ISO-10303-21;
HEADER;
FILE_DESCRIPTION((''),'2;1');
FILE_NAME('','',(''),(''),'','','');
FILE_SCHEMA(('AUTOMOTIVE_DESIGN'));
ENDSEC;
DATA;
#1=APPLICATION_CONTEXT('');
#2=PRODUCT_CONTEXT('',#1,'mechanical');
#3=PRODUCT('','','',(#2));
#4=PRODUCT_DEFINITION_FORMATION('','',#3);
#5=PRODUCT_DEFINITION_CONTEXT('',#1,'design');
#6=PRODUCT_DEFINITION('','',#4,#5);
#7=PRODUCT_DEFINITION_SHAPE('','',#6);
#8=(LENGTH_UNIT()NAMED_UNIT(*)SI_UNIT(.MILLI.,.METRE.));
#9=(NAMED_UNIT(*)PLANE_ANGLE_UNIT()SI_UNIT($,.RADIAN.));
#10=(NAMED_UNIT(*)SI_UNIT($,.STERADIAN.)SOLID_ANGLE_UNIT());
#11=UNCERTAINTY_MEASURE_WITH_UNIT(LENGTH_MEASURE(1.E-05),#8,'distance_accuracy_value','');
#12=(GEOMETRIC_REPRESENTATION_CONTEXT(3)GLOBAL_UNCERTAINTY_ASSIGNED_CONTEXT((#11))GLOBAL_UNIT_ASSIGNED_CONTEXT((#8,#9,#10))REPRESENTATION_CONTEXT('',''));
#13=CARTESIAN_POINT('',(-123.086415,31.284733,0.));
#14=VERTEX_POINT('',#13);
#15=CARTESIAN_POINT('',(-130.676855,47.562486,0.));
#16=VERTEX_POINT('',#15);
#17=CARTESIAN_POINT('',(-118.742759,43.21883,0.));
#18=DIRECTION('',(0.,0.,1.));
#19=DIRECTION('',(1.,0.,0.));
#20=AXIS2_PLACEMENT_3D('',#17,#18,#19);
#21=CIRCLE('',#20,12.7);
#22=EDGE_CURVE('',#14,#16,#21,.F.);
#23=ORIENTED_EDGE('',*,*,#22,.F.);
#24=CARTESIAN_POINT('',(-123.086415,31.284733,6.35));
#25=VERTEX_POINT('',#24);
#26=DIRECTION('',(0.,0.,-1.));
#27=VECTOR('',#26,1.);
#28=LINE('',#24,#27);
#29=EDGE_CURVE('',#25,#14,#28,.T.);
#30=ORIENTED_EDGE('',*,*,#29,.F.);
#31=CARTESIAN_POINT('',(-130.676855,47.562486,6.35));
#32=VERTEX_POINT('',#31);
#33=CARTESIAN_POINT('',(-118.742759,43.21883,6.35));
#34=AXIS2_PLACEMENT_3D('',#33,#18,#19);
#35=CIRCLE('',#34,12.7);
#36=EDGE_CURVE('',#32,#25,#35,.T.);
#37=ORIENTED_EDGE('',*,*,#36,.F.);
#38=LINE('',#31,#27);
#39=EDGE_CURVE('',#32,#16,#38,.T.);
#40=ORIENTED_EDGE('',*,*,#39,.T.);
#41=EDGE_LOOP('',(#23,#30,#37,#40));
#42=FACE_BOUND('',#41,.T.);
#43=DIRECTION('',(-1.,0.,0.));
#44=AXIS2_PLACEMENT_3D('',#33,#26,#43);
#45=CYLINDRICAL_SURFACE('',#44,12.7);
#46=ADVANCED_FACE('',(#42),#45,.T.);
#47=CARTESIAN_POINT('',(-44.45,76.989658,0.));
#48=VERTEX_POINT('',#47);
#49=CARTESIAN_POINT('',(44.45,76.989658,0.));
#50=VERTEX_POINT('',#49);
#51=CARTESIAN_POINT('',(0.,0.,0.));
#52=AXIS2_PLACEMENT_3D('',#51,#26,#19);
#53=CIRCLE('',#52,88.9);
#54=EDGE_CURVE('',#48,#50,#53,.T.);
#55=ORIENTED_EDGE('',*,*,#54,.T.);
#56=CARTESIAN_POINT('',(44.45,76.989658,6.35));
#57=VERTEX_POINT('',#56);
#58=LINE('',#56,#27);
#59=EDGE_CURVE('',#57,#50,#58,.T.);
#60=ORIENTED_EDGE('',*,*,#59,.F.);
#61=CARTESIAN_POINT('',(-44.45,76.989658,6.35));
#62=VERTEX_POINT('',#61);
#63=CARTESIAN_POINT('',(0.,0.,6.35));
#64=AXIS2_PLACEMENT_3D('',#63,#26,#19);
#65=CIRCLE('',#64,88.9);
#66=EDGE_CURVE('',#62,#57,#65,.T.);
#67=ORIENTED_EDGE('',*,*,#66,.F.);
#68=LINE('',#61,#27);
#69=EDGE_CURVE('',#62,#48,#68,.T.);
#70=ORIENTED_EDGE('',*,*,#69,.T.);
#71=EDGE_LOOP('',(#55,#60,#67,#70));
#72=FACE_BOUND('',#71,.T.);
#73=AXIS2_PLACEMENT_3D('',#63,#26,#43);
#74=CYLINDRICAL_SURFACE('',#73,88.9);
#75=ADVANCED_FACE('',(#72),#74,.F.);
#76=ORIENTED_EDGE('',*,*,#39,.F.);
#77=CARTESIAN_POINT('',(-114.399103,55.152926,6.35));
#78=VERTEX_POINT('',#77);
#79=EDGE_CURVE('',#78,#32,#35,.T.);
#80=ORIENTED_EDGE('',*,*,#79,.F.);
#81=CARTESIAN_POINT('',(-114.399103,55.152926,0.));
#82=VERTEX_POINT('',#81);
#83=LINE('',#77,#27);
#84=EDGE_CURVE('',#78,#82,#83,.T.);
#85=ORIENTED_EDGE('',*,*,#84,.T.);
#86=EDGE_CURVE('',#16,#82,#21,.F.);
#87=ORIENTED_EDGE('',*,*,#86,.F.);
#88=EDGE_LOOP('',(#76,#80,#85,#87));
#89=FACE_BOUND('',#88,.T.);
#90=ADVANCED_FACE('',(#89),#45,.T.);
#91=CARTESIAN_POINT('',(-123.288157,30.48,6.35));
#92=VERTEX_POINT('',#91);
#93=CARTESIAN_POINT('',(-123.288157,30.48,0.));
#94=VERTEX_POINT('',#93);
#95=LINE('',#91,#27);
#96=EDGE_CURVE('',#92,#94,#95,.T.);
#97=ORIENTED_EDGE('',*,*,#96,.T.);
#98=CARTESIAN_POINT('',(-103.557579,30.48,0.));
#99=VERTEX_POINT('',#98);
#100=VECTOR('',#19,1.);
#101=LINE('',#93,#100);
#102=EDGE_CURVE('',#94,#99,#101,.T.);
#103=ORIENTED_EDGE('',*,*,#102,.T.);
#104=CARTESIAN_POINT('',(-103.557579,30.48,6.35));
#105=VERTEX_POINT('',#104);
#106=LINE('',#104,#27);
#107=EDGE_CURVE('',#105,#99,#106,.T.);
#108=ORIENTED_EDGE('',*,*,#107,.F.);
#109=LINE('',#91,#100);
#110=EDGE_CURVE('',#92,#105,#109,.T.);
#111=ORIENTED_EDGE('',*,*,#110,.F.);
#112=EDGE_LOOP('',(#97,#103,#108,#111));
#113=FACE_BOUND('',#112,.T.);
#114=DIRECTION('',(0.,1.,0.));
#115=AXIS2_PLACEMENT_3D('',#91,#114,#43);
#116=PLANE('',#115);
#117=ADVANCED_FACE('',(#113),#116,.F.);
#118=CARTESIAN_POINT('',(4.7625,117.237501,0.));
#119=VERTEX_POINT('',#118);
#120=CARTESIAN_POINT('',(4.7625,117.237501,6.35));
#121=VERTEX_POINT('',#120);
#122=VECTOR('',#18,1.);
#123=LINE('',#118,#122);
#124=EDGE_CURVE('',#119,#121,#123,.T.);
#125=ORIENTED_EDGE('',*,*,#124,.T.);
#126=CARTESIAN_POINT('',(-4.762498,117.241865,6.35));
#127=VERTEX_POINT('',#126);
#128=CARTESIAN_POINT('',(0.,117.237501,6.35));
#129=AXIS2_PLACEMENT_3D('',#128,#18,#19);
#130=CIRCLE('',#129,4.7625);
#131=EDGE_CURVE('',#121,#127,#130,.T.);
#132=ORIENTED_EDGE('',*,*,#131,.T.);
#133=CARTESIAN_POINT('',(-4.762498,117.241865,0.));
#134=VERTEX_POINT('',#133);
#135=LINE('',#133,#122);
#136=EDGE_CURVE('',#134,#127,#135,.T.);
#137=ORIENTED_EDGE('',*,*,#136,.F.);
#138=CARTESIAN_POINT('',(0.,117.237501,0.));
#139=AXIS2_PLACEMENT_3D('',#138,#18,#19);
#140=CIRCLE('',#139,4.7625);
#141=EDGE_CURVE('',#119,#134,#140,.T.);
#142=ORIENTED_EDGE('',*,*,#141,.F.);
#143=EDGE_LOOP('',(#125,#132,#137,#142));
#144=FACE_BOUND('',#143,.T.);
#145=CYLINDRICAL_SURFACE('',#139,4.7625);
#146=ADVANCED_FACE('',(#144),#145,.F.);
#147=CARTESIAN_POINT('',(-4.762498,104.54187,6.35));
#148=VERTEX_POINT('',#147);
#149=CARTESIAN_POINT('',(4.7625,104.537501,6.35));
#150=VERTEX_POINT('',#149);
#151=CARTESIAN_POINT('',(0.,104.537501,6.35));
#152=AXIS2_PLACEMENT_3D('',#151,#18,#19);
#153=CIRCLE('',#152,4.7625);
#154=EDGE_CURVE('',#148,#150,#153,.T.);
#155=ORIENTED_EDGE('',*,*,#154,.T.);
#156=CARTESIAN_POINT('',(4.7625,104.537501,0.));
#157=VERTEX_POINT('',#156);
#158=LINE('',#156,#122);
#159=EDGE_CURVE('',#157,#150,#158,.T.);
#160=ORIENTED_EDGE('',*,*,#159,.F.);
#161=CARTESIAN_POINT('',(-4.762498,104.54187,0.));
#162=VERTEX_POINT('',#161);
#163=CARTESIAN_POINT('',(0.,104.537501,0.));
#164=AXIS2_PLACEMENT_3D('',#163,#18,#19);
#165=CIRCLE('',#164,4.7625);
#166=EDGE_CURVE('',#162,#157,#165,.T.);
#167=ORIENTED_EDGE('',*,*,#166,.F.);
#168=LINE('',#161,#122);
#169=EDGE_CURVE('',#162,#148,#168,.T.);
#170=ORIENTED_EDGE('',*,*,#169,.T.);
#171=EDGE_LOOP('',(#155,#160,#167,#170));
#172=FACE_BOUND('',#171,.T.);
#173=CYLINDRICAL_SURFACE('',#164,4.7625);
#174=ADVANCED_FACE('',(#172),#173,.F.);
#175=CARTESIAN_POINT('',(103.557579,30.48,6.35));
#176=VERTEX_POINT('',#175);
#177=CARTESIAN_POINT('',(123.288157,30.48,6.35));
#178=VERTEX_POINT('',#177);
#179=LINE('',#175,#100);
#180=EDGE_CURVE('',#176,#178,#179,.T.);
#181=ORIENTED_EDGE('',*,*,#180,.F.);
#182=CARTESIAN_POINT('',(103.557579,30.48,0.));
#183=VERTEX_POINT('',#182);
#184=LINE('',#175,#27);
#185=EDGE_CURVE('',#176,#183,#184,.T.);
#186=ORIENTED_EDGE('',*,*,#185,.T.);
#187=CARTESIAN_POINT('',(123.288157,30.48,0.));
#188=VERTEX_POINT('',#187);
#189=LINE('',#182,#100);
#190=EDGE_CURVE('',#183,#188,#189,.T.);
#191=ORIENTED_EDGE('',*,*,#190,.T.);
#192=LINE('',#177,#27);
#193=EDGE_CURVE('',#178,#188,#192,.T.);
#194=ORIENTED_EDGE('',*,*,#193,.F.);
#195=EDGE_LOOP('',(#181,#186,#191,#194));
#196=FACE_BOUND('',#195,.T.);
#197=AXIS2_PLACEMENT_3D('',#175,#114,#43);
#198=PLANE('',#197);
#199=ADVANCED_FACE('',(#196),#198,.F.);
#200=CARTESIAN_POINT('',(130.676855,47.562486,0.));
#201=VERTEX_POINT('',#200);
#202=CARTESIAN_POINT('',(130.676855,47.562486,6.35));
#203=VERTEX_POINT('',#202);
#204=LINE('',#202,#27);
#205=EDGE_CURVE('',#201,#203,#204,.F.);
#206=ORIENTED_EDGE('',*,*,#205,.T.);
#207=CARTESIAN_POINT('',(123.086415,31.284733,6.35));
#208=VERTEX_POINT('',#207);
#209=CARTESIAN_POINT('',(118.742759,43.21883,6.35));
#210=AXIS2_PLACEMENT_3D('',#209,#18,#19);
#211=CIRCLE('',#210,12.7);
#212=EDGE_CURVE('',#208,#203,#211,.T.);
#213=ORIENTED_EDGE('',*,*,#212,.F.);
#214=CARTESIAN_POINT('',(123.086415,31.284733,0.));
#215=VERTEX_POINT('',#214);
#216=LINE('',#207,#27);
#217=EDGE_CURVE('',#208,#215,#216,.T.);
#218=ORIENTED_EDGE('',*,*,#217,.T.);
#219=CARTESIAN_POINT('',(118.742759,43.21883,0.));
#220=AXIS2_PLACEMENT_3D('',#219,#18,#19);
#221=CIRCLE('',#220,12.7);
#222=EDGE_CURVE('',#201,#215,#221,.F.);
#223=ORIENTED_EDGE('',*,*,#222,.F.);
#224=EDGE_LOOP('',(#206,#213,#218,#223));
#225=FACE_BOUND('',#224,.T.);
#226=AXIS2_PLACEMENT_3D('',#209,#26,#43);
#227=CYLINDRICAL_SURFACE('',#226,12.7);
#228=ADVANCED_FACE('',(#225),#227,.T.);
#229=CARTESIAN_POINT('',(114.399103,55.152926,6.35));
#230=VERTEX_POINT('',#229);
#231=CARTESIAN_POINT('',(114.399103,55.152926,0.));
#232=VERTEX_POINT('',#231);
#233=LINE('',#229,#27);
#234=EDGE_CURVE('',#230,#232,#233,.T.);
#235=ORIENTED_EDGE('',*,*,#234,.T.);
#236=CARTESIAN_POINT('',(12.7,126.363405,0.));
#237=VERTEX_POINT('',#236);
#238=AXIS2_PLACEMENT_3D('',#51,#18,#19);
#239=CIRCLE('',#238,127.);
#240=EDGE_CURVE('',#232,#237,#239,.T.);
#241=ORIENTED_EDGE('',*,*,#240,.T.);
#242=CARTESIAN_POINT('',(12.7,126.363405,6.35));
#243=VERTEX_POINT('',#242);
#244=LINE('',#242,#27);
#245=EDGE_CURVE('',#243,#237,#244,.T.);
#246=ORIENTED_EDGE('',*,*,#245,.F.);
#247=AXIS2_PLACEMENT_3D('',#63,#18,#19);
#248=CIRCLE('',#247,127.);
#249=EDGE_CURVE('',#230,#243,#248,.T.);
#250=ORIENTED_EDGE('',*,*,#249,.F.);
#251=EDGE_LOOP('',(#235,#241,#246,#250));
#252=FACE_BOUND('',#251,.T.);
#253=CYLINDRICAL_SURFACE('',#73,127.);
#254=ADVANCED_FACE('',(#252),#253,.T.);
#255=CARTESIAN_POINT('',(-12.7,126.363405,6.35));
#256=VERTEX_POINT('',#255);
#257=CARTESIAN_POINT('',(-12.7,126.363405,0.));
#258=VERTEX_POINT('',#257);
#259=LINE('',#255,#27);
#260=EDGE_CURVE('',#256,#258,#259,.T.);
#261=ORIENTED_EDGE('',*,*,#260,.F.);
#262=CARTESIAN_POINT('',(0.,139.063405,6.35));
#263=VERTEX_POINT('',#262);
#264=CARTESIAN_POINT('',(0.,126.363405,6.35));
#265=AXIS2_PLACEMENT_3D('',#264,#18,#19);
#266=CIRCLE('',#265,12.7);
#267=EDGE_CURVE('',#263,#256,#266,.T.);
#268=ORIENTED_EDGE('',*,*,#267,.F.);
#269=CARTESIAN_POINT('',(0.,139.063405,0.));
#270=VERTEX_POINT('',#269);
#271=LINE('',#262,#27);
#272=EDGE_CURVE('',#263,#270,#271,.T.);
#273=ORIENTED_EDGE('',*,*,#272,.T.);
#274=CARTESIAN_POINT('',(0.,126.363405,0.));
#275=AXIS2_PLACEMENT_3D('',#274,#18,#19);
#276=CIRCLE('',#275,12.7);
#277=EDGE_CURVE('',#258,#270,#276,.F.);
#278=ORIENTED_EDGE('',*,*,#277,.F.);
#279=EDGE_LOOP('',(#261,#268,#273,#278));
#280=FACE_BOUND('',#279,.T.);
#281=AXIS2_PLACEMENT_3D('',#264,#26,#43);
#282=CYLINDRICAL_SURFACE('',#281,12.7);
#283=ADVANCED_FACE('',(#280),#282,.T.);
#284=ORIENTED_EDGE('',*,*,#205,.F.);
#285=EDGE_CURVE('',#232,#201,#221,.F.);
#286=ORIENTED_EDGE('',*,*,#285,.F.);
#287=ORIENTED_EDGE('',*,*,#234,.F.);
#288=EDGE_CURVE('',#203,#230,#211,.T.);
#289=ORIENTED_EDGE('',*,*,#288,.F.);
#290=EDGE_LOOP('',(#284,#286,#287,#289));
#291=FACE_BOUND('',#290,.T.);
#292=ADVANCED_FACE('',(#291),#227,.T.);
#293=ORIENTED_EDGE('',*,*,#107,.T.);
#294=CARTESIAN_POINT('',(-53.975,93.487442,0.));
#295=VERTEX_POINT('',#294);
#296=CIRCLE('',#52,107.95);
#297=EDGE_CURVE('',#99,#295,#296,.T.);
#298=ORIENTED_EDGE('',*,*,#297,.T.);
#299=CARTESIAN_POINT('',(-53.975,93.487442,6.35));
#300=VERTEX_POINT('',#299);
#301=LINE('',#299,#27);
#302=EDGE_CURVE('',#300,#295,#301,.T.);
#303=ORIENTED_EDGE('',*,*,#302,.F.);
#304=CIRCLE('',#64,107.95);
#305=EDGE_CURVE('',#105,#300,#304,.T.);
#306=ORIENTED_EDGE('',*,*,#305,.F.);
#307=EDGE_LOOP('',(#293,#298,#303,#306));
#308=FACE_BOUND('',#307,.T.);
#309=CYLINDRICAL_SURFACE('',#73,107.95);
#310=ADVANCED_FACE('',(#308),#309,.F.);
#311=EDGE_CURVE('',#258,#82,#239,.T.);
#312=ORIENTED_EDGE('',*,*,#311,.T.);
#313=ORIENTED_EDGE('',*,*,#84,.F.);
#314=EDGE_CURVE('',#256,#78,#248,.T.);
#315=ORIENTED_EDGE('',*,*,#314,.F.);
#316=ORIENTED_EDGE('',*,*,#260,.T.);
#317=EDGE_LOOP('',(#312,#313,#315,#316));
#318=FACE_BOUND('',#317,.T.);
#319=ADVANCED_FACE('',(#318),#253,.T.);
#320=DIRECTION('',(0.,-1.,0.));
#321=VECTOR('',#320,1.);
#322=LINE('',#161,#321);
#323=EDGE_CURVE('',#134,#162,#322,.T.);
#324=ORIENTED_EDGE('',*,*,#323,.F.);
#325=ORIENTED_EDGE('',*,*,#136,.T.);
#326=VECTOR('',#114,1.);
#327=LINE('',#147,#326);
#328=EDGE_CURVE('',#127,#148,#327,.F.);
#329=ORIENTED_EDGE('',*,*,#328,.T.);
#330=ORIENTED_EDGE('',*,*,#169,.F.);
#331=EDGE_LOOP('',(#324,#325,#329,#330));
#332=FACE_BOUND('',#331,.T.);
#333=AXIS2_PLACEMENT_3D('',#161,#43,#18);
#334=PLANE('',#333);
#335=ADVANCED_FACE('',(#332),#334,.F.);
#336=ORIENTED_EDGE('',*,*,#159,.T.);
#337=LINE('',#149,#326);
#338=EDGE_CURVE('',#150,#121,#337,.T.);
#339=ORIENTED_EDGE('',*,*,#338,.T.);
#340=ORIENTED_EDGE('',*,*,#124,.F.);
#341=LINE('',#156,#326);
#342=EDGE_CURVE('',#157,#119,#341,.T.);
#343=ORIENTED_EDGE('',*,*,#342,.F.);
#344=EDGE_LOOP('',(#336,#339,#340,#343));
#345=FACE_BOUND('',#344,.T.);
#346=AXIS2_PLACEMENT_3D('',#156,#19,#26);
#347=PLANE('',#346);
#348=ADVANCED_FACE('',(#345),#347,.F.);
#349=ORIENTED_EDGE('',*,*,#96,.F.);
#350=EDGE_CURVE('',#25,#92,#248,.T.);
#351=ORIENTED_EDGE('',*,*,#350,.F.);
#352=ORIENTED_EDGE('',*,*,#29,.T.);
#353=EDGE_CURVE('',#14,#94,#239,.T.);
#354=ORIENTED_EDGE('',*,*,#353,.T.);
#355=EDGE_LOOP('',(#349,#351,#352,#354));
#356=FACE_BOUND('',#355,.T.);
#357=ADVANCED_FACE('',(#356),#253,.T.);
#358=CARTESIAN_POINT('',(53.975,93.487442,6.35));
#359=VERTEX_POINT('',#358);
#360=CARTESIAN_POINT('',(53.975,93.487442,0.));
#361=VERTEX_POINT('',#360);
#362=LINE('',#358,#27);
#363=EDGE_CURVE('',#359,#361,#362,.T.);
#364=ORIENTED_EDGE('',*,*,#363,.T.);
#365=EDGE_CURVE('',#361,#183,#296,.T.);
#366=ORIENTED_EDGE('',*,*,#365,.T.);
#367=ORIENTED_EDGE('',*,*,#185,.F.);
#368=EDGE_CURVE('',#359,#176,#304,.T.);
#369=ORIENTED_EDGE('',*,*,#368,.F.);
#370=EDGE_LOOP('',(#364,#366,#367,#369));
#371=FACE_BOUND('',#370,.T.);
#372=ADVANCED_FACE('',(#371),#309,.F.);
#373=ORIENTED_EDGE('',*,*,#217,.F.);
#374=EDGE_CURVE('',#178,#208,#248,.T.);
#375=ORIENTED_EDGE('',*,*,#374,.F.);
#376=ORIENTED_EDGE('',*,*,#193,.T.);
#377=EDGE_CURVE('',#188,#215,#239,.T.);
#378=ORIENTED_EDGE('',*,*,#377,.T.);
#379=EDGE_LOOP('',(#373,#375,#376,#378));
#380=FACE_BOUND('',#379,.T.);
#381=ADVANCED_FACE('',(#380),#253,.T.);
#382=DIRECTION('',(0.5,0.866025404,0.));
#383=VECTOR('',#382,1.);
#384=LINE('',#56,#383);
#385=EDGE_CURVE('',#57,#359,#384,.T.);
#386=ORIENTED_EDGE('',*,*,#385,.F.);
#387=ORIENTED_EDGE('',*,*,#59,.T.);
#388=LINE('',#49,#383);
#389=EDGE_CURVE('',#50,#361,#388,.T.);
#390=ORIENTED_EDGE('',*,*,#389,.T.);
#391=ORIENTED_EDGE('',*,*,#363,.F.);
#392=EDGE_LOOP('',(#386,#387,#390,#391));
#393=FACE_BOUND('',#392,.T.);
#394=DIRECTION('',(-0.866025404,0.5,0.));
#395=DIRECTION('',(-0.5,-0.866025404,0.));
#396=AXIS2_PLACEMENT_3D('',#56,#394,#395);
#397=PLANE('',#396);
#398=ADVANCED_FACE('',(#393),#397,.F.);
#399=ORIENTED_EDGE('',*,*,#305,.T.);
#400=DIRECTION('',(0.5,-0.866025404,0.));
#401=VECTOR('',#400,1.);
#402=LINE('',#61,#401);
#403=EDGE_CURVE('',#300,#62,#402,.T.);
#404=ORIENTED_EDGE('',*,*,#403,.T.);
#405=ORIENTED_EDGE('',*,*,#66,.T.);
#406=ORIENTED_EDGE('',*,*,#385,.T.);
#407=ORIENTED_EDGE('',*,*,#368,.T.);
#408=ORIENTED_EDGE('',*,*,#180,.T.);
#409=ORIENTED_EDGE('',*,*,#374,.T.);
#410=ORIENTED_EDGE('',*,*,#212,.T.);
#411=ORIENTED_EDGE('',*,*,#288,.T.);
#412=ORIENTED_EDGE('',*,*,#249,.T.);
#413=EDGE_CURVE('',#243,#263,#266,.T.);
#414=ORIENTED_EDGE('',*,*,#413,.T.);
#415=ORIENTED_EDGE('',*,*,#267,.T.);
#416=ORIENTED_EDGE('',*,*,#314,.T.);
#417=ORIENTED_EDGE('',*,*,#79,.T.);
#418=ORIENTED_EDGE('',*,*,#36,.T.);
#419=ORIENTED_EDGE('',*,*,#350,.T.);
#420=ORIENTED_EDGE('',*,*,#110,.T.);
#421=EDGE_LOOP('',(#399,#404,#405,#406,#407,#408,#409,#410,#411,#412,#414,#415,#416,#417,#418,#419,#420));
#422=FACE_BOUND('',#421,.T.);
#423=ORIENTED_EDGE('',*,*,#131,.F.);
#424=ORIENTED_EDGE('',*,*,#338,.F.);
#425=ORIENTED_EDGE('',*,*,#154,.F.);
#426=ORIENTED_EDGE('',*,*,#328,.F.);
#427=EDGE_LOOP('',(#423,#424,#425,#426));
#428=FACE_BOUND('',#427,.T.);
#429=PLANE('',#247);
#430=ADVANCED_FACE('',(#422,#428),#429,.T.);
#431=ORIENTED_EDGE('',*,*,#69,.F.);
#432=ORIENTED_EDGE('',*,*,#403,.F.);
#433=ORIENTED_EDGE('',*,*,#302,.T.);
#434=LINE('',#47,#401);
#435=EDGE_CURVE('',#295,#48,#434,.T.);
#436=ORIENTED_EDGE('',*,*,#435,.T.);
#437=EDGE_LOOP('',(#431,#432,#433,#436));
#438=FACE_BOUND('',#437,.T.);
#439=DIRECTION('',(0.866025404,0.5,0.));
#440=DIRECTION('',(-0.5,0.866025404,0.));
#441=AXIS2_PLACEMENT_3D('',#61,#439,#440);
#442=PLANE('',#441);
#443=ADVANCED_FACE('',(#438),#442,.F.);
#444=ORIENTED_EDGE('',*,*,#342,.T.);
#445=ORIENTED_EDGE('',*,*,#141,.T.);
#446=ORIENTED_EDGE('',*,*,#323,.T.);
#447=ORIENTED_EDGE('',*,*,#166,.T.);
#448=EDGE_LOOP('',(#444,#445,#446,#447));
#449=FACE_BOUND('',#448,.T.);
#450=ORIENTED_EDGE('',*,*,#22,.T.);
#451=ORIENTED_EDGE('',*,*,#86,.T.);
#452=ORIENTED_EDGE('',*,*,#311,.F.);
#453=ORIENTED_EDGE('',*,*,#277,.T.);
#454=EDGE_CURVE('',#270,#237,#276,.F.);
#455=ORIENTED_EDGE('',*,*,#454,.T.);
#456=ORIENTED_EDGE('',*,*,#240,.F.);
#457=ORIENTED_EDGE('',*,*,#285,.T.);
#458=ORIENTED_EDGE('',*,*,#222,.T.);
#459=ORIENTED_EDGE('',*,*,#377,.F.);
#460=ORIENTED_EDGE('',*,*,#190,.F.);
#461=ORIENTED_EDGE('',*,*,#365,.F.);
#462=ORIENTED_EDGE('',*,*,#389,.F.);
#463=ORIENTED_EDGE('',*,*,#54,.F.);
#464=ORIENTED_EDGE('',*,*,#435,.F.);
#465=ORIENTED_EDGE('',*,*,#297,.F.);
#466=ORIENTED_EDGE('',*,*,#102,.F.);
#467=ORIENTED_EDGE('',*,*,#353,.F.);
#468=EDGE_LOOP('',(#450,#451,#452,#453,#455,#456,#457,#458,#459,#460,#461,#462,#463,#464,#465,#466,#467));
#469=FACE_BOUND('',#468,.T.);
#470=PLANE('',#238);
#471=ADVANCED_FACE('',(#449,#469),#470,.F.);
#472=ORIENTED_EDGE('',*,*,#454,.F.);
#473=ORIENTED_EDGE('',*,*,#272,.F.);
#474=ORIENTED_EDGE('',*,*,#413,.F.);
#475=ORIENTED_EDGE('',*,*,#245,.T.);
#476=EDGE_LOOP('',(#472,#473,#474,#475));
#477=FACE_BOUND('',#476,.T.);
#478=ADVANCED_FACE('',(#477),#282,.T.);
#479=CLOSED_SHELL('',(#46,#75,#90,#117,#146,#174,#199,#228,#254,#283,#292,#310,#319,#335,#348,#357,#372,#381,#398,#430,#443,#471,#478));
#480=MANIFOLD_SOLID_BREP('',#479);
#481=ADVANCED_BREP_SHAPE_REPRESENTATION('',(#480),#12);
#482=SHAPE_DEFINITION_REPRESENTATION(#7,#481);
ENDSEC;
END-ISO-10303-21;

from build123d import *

# Parameters (mm, degrees)
BOSS_EXTRUDE1_DEPTH     = 6.35
FILLET1_R               = 12.7
CUT_EXTRUDE1_DEPTH      = 192.457982885
CUT_EXTRUDE1_DEPTH_BACK = 192.457982885


with BuildPart() as part:
    # Sketch1 → Boss-Extrude1 (new body)
    with BuildSketch(Plane.XY):
        with BuildLine():
            Line((-12.7, 126.363404513), (-12.7, 139.063404513))
            Line((-12.7, 139.063404513), (12.7, 139.063404513))
            Line((12.7, 139.063404513), (12.7, 126.363404513))
            ThreePointArc((12.7, 126.363404513), (72.844207417, 104.032309625), (114.399102938, 55.152926006))
            Line((114.399102938, 55.152926006), (126.333199222, 59.496581827))
            Line((126.333199222, 59.496581827), (135.020510862, 35.628389259))
            Line((135.020510862, 35.628389259), (123.086414578, 31.284733439))
            ThreePointArc((123.086414578, 31.284733439), (123.187942798, 30.882531456), (123.288156771, 30.48))
            Line((123.288156771, 30.48), (103.55757867, 30.48))
            ThreePointArc((103.55757867, 30.48), (84.832852027, 66.757694065), (53.975, 93.487442339))
            Line((53.975, 93.487442339), (44.45, 76.989658396))
            ThreePointArc((44.45, 76.989658396), (0, 88.9), (-44.45, 76.989658396))
            Line((-44.45, 76.989658396), (-53.975, 93.487442339))
            ThreePointArc((-53.975, 93.487442339), (-84.832852027, 66.757694065), (-103.55757867, 30.48))
            Line((-103.55757867, 30.48), (-123.288156771, 30.48))
            ThreePointArc((-123.288156771, 30.48), (-123.187942798, 30.882531456), (-123.086414578, 31.284733439))
            Line((-123.086414578, 31.284733439), (-135.020510862, 35.628389259))
            Line((-135.020510862, 35.628389259), (-126.333199222, 59.496581827))
            Line((-126.333199222, 59.496581827), (-114.399102938, 55.152926006))
            ThreePointArc((-114.399102938, 55.152926006), (-72.844207417, 104.032309625), (-12.7, 126.363404513))
        make_face()
    extrude(amount=BOSS_EXTRUDE1_DEPTH)

    # Fillet1
    fillet1_edges = [part.edges().sort_by_distance(p)[0] for p in [
        (135.020510862, 35.628389259, 3.175),
        (126.333199222, 59.496581827, 3.175),
        (-135.020510862, 35.628389259, 3.175),
        (-126.333199222, 59.496581827, 3.175),
        (-12.7, 139.063404513, 3.175),
        (12.7, 139.063404513, 3.175),
    ]]
    fillet(fillet1_edges, radius=FILLET1_R - 0.0001)  # a hair under: the kernel refuses the full size

    # Sketch2 → Cut-Extrude1 (cut, two sides: drawn at the far end of the back side and taken through both)
    with BuildSketch(Plane.XY.offset(6.35).offset(-CUT_EXTRUDE1_DEPTH_BACK)):
        with BuildLine():
            Line((-4.762498, 104.541870481), (-4.762498, 117.241865148))
            ThreePointArc((-4.762498, 117.241865148), (0.002182277, 122.000000094), (4.7625, 117.237500594))
            Line((4.7625, 117.237500594), (4.7625, 104.537500594))
            ThreePointArc((4.7625, 104.537500594), (-0.002184944, 99.77500109), (-4.762498, 104.541870481))
        make_face()
    extrude(amount=CUT_EXTRUDE1_DEPTH + CUT_EXTRUDE1_DEPTH_BACK, mode=Mode.SUBTRACT)


solid = part.part
